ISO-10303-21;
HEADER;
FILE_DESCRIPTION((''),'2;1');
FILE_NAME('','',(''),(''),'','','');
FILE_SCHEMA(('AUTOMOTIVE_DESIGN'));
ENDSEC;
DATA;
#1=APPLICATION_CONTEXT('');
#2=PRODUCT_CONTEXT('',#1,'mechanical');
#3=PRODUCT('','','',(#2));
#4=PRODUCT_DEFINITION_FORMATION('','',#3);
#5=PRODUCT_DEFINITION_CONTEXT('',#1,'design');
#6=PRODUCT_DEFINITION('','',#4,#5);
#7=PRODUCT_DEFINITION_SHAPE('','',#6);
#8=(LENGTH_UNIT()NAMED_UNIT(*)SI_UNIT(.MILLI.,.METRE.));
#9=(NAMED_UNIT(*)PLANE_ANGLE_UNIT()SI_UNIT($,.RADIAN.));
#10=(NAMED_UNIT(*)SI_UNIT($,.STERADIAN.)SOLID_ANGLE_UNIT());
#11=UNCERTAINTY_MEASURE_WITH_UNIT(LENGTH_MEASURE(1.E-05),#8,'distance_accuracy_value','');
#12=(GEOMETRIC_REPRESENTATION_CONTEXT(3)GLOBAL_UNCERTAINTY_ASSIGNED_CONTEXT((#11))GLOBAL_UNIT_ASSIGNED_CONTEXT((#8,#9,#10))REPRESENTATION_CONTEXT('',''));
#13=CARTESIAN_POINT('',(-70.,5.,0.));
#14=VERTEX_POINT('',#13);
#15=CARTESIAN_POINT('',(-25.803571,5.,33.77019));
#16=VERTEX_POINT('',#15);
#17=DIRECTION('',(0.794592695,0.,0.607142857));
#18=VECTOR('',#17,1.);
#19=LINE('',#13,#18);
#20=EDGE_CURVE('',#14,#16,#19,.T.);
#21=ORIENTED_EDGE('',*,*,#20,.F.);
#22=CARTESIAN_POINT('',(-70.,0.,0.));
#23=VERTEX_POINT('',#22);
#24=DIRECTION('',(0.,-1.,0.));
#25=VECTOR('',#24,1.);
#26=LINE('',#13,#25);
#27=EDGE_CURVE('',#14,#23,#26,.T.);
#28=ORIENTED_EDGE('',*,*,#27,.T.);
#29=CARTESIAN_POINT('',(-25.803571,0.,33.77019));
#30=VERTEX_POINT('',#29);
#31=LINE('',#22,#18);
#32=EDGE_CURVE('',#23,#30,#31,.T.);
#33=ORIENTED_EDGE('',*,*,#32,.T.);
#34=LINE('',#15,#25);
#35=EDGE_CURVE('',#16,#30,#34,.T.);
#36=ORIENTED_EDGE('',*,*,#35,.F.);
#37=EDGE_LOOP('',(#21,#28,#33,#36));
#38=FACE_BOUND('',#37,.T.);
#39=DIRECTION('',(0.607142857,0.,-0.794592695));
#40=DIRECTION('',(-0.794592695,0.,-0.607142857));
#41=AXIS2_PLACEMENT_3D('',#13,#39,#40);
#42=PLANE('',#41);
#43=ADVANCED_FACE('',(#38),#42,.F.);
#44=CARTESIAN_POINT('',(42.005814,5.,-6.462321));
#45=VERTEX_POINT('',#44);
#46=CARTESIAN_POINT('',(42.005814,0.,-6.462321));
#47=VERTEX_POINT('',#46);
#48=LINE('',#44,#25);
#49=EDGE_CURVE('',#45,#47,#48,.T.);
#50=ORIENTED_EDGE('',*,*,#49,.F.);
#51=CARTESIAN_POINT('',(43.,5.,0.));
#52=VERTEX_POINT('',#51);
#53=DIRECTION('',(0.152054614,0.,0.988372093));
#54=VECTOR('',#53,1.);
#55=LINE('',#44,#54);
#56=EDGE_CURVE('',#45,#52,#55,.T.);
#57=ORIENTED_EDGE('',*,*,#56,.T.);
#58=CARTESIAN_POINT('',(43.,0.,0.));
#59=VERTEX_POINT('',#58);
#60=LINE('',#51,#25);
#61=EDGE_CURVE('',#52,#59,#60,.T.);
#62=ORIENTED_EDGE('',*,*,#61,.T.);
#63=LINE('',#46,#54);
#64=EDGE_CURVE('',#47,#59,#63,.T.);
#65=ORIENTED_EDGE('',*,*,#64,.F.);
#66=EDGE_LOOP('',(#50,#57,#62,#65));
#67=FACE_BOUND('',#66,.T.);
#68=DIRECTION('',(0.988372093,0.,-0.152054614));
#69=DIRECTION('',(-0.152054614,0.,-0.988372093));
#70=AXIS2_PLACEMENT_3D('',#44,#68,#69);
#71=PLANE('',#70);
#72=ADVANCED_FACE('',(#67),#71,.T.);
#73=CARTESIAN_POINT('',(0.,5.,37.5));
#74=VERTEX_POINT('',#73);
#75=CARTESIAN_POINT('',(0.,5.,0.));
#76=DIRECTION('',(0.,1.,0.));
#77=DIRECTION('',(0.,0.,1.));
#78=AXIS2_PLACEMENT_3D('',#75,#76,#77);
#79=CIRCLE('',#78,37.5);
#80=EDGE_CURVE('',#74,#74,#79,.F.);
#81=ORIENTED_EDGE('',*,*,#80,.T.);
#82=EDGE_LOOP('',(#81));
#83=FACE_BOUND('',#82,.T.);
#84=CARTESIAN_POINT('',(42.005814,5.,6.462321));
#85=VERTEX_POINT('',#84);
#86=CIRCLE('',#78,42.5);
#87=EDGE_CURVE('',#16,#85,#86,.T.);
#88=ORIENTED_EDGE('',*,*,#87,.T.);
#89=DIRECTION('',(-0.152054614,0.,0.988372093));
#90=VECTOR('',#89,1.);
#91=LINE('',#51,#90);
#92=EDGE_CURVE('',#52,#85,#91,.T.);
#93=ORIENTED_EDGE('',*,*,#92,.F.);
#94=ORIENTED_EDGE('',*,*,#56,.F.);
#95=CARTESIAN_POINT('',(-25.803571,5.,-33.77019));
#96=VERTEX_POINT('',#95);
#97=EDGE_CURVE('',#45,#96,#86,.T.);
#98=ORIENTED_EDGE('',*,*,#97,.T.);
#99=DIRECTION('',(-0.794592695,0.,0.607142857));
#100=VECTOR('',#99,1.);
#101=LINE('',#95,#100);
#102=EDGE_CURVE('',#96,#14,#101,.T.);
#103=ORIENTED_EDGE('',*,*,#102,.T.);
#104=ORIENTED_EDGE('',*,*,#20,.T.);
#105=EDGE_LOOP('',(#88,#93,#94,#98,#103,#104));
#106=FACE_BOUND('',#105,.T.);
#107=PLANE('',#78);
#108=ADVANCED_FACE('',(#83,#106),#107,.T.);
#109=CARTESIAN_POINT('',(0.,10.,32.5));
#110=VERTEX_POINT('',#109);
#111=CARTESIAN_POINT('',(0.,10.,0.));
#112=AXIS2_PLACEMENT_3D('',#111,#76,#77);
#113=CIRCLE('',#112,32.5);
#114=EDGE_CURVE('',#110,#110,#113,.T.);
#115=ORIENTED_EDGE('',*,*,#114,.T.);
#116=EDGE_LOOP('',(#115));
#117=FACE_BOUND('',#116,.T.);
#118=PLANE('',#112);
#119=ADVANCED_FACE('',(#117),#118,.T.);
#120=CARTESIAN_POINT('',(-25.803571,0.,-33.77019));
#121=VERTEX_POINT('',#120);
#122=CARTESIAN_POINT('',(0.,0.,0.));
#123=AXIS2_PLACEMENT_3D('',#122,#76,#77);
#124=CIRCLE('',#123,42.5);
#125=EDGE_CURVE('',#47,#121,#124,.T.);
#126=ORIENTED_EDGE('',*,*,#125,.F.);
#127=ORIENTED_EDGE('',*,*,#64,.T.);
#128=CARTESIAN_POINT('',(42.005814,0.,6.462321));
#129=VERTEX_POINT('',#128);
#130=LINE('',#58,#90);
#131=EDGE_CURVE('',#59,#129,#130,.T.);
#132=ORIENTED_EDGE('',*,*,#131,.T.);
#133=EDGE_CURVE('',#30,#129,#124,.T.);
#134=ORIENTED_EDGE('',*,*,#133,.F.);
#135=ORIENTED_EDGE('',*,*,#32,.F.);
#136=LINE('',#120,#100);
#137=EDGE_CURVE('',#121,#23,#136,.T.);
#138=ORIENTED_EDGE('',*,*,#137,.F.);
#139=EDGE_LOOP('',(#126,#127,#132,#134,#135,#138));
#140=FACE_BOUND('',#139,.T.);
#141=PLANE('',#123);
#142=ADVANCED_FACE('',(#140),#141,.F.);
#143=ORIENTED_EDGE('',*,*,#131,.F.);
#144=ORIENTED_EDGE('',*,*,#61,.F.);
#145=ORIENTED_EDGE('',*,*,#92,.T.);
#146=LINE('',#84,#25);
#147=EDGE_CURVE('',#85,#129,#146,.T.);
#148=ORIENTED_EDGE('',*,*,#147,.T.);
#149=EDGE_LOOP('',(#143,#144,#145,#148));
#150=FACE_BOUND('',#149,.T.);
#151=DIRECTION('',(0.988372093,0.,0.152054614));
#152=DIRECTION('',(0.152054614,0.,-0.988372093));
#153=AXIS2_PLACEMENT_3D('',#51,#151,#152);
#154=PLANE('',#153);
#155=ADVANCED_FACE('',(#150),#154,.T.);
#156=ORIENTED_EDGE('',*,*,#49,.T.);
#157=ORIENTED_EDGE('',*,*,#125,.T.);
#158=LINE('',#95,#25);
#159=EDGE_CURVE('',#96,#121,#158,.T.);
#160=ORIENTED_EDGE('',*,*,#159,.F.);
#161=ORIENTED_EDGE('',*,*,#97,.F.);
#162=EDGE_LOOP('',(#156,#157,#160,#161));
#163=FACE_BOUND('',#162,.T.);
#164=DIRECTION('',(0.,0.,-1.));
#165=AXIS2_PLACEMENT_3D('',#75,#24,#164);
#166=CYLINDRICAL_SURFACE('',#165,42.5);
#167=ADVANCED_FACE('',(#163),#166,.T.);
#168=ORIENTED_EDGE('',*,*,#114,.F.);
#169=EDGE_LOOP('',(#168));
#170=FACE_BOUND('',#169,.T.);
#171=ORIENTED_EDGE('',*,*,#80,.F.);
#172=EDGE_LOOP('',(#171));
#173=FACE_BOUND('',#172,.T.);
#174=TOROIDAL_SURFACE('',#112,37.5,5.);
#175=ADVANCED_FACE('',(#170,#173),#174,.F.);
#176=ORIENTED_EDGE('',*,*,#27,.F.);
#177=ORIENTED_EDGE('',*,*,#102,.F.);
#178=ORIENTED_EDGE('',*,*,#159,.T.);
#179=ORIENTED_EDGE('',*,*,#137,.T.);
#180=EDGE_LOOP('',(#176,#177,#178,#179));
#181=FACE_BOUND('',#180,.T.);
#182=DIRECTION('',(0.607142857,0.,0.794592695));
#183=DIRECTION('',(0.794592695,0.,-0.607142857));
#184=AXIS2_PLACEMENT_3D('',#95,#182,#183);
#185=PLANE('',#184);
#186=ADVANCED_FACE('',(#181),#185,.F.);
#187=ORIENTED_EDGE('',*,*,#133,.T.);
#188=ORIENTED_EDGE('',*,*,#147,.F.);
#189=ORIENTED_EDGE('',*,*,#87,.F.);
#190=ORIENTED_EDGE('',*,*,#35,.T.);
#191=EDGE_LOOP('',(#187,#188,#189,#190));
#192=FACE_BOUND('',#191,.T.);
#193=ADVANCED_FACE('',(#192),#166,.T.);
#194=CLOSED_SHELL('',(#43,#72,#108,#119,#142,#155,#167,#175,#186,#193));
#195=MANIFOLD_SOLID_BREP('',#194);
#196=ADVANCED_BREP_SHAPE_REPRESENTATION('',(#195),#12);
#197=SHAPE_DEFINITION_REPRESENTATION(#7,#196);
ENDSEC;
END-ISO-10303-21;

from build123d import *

# Parameters (mm, degrees)
BOSS_EXTRUDE1_DEPTH = 5
SKETCH2_R           = 32.5
BOSS_EXTRUDE2_DEPTH = 5
FILLET1_R           = 5


with BuildPart() as part:
    # Sketch1 → Boss-Extrude1 (new body)
    with BuildSketch(Plane(origin=(0, 0, 0), x_dir=(1, 0, 0), z_dir=(0, 1, 0))):
        with BuildLine():
            Line((-25.803571429, 33.770189539), (-70, 0))
            Line((-70, 0), (-25.803571429, -33.770189539))
            ThreePointArc((-25.803571429, -33.770189539), (15.876337275, -39.423240794), (42.005813953, -6.462321108))
            Line((42.005813953, -6.462321108), (43, 0))
            Line((43, 0), (42.005813953, 6.462321108))
            ThreePointArc((42.005813953, 6.462321108), (15.876337275, 39.423240794), (-25.803571429, 33.770189539))
        make_face()
    extrude(amount=BOSS_EXTRUDE1_DEPTH)

    # Sketch2 → Boss-Extrude2 (add)
    with BuildSketch(Plane(origin=(0, 5, 0), x_dir=(1, 0, 0), z_dir=(0, 1, 0))):
        with Locations(Location((0, 0, 0), (0, 0, 270))):
            Circle(SKETCH2_R)
    extrude(amount=BOSS_EXTRUDE2_DEPTH)

    # Fillet1
    fillet1_edges = [part.edges().sort_by_distance(p)[0] for p in [
        (0, 5, -32.5),
    ]]
    fillet(fillet1_edges, radius=FILLET1_R - 0.0001)  # a hair under: the kernel refuses the full size


solid = part.part
